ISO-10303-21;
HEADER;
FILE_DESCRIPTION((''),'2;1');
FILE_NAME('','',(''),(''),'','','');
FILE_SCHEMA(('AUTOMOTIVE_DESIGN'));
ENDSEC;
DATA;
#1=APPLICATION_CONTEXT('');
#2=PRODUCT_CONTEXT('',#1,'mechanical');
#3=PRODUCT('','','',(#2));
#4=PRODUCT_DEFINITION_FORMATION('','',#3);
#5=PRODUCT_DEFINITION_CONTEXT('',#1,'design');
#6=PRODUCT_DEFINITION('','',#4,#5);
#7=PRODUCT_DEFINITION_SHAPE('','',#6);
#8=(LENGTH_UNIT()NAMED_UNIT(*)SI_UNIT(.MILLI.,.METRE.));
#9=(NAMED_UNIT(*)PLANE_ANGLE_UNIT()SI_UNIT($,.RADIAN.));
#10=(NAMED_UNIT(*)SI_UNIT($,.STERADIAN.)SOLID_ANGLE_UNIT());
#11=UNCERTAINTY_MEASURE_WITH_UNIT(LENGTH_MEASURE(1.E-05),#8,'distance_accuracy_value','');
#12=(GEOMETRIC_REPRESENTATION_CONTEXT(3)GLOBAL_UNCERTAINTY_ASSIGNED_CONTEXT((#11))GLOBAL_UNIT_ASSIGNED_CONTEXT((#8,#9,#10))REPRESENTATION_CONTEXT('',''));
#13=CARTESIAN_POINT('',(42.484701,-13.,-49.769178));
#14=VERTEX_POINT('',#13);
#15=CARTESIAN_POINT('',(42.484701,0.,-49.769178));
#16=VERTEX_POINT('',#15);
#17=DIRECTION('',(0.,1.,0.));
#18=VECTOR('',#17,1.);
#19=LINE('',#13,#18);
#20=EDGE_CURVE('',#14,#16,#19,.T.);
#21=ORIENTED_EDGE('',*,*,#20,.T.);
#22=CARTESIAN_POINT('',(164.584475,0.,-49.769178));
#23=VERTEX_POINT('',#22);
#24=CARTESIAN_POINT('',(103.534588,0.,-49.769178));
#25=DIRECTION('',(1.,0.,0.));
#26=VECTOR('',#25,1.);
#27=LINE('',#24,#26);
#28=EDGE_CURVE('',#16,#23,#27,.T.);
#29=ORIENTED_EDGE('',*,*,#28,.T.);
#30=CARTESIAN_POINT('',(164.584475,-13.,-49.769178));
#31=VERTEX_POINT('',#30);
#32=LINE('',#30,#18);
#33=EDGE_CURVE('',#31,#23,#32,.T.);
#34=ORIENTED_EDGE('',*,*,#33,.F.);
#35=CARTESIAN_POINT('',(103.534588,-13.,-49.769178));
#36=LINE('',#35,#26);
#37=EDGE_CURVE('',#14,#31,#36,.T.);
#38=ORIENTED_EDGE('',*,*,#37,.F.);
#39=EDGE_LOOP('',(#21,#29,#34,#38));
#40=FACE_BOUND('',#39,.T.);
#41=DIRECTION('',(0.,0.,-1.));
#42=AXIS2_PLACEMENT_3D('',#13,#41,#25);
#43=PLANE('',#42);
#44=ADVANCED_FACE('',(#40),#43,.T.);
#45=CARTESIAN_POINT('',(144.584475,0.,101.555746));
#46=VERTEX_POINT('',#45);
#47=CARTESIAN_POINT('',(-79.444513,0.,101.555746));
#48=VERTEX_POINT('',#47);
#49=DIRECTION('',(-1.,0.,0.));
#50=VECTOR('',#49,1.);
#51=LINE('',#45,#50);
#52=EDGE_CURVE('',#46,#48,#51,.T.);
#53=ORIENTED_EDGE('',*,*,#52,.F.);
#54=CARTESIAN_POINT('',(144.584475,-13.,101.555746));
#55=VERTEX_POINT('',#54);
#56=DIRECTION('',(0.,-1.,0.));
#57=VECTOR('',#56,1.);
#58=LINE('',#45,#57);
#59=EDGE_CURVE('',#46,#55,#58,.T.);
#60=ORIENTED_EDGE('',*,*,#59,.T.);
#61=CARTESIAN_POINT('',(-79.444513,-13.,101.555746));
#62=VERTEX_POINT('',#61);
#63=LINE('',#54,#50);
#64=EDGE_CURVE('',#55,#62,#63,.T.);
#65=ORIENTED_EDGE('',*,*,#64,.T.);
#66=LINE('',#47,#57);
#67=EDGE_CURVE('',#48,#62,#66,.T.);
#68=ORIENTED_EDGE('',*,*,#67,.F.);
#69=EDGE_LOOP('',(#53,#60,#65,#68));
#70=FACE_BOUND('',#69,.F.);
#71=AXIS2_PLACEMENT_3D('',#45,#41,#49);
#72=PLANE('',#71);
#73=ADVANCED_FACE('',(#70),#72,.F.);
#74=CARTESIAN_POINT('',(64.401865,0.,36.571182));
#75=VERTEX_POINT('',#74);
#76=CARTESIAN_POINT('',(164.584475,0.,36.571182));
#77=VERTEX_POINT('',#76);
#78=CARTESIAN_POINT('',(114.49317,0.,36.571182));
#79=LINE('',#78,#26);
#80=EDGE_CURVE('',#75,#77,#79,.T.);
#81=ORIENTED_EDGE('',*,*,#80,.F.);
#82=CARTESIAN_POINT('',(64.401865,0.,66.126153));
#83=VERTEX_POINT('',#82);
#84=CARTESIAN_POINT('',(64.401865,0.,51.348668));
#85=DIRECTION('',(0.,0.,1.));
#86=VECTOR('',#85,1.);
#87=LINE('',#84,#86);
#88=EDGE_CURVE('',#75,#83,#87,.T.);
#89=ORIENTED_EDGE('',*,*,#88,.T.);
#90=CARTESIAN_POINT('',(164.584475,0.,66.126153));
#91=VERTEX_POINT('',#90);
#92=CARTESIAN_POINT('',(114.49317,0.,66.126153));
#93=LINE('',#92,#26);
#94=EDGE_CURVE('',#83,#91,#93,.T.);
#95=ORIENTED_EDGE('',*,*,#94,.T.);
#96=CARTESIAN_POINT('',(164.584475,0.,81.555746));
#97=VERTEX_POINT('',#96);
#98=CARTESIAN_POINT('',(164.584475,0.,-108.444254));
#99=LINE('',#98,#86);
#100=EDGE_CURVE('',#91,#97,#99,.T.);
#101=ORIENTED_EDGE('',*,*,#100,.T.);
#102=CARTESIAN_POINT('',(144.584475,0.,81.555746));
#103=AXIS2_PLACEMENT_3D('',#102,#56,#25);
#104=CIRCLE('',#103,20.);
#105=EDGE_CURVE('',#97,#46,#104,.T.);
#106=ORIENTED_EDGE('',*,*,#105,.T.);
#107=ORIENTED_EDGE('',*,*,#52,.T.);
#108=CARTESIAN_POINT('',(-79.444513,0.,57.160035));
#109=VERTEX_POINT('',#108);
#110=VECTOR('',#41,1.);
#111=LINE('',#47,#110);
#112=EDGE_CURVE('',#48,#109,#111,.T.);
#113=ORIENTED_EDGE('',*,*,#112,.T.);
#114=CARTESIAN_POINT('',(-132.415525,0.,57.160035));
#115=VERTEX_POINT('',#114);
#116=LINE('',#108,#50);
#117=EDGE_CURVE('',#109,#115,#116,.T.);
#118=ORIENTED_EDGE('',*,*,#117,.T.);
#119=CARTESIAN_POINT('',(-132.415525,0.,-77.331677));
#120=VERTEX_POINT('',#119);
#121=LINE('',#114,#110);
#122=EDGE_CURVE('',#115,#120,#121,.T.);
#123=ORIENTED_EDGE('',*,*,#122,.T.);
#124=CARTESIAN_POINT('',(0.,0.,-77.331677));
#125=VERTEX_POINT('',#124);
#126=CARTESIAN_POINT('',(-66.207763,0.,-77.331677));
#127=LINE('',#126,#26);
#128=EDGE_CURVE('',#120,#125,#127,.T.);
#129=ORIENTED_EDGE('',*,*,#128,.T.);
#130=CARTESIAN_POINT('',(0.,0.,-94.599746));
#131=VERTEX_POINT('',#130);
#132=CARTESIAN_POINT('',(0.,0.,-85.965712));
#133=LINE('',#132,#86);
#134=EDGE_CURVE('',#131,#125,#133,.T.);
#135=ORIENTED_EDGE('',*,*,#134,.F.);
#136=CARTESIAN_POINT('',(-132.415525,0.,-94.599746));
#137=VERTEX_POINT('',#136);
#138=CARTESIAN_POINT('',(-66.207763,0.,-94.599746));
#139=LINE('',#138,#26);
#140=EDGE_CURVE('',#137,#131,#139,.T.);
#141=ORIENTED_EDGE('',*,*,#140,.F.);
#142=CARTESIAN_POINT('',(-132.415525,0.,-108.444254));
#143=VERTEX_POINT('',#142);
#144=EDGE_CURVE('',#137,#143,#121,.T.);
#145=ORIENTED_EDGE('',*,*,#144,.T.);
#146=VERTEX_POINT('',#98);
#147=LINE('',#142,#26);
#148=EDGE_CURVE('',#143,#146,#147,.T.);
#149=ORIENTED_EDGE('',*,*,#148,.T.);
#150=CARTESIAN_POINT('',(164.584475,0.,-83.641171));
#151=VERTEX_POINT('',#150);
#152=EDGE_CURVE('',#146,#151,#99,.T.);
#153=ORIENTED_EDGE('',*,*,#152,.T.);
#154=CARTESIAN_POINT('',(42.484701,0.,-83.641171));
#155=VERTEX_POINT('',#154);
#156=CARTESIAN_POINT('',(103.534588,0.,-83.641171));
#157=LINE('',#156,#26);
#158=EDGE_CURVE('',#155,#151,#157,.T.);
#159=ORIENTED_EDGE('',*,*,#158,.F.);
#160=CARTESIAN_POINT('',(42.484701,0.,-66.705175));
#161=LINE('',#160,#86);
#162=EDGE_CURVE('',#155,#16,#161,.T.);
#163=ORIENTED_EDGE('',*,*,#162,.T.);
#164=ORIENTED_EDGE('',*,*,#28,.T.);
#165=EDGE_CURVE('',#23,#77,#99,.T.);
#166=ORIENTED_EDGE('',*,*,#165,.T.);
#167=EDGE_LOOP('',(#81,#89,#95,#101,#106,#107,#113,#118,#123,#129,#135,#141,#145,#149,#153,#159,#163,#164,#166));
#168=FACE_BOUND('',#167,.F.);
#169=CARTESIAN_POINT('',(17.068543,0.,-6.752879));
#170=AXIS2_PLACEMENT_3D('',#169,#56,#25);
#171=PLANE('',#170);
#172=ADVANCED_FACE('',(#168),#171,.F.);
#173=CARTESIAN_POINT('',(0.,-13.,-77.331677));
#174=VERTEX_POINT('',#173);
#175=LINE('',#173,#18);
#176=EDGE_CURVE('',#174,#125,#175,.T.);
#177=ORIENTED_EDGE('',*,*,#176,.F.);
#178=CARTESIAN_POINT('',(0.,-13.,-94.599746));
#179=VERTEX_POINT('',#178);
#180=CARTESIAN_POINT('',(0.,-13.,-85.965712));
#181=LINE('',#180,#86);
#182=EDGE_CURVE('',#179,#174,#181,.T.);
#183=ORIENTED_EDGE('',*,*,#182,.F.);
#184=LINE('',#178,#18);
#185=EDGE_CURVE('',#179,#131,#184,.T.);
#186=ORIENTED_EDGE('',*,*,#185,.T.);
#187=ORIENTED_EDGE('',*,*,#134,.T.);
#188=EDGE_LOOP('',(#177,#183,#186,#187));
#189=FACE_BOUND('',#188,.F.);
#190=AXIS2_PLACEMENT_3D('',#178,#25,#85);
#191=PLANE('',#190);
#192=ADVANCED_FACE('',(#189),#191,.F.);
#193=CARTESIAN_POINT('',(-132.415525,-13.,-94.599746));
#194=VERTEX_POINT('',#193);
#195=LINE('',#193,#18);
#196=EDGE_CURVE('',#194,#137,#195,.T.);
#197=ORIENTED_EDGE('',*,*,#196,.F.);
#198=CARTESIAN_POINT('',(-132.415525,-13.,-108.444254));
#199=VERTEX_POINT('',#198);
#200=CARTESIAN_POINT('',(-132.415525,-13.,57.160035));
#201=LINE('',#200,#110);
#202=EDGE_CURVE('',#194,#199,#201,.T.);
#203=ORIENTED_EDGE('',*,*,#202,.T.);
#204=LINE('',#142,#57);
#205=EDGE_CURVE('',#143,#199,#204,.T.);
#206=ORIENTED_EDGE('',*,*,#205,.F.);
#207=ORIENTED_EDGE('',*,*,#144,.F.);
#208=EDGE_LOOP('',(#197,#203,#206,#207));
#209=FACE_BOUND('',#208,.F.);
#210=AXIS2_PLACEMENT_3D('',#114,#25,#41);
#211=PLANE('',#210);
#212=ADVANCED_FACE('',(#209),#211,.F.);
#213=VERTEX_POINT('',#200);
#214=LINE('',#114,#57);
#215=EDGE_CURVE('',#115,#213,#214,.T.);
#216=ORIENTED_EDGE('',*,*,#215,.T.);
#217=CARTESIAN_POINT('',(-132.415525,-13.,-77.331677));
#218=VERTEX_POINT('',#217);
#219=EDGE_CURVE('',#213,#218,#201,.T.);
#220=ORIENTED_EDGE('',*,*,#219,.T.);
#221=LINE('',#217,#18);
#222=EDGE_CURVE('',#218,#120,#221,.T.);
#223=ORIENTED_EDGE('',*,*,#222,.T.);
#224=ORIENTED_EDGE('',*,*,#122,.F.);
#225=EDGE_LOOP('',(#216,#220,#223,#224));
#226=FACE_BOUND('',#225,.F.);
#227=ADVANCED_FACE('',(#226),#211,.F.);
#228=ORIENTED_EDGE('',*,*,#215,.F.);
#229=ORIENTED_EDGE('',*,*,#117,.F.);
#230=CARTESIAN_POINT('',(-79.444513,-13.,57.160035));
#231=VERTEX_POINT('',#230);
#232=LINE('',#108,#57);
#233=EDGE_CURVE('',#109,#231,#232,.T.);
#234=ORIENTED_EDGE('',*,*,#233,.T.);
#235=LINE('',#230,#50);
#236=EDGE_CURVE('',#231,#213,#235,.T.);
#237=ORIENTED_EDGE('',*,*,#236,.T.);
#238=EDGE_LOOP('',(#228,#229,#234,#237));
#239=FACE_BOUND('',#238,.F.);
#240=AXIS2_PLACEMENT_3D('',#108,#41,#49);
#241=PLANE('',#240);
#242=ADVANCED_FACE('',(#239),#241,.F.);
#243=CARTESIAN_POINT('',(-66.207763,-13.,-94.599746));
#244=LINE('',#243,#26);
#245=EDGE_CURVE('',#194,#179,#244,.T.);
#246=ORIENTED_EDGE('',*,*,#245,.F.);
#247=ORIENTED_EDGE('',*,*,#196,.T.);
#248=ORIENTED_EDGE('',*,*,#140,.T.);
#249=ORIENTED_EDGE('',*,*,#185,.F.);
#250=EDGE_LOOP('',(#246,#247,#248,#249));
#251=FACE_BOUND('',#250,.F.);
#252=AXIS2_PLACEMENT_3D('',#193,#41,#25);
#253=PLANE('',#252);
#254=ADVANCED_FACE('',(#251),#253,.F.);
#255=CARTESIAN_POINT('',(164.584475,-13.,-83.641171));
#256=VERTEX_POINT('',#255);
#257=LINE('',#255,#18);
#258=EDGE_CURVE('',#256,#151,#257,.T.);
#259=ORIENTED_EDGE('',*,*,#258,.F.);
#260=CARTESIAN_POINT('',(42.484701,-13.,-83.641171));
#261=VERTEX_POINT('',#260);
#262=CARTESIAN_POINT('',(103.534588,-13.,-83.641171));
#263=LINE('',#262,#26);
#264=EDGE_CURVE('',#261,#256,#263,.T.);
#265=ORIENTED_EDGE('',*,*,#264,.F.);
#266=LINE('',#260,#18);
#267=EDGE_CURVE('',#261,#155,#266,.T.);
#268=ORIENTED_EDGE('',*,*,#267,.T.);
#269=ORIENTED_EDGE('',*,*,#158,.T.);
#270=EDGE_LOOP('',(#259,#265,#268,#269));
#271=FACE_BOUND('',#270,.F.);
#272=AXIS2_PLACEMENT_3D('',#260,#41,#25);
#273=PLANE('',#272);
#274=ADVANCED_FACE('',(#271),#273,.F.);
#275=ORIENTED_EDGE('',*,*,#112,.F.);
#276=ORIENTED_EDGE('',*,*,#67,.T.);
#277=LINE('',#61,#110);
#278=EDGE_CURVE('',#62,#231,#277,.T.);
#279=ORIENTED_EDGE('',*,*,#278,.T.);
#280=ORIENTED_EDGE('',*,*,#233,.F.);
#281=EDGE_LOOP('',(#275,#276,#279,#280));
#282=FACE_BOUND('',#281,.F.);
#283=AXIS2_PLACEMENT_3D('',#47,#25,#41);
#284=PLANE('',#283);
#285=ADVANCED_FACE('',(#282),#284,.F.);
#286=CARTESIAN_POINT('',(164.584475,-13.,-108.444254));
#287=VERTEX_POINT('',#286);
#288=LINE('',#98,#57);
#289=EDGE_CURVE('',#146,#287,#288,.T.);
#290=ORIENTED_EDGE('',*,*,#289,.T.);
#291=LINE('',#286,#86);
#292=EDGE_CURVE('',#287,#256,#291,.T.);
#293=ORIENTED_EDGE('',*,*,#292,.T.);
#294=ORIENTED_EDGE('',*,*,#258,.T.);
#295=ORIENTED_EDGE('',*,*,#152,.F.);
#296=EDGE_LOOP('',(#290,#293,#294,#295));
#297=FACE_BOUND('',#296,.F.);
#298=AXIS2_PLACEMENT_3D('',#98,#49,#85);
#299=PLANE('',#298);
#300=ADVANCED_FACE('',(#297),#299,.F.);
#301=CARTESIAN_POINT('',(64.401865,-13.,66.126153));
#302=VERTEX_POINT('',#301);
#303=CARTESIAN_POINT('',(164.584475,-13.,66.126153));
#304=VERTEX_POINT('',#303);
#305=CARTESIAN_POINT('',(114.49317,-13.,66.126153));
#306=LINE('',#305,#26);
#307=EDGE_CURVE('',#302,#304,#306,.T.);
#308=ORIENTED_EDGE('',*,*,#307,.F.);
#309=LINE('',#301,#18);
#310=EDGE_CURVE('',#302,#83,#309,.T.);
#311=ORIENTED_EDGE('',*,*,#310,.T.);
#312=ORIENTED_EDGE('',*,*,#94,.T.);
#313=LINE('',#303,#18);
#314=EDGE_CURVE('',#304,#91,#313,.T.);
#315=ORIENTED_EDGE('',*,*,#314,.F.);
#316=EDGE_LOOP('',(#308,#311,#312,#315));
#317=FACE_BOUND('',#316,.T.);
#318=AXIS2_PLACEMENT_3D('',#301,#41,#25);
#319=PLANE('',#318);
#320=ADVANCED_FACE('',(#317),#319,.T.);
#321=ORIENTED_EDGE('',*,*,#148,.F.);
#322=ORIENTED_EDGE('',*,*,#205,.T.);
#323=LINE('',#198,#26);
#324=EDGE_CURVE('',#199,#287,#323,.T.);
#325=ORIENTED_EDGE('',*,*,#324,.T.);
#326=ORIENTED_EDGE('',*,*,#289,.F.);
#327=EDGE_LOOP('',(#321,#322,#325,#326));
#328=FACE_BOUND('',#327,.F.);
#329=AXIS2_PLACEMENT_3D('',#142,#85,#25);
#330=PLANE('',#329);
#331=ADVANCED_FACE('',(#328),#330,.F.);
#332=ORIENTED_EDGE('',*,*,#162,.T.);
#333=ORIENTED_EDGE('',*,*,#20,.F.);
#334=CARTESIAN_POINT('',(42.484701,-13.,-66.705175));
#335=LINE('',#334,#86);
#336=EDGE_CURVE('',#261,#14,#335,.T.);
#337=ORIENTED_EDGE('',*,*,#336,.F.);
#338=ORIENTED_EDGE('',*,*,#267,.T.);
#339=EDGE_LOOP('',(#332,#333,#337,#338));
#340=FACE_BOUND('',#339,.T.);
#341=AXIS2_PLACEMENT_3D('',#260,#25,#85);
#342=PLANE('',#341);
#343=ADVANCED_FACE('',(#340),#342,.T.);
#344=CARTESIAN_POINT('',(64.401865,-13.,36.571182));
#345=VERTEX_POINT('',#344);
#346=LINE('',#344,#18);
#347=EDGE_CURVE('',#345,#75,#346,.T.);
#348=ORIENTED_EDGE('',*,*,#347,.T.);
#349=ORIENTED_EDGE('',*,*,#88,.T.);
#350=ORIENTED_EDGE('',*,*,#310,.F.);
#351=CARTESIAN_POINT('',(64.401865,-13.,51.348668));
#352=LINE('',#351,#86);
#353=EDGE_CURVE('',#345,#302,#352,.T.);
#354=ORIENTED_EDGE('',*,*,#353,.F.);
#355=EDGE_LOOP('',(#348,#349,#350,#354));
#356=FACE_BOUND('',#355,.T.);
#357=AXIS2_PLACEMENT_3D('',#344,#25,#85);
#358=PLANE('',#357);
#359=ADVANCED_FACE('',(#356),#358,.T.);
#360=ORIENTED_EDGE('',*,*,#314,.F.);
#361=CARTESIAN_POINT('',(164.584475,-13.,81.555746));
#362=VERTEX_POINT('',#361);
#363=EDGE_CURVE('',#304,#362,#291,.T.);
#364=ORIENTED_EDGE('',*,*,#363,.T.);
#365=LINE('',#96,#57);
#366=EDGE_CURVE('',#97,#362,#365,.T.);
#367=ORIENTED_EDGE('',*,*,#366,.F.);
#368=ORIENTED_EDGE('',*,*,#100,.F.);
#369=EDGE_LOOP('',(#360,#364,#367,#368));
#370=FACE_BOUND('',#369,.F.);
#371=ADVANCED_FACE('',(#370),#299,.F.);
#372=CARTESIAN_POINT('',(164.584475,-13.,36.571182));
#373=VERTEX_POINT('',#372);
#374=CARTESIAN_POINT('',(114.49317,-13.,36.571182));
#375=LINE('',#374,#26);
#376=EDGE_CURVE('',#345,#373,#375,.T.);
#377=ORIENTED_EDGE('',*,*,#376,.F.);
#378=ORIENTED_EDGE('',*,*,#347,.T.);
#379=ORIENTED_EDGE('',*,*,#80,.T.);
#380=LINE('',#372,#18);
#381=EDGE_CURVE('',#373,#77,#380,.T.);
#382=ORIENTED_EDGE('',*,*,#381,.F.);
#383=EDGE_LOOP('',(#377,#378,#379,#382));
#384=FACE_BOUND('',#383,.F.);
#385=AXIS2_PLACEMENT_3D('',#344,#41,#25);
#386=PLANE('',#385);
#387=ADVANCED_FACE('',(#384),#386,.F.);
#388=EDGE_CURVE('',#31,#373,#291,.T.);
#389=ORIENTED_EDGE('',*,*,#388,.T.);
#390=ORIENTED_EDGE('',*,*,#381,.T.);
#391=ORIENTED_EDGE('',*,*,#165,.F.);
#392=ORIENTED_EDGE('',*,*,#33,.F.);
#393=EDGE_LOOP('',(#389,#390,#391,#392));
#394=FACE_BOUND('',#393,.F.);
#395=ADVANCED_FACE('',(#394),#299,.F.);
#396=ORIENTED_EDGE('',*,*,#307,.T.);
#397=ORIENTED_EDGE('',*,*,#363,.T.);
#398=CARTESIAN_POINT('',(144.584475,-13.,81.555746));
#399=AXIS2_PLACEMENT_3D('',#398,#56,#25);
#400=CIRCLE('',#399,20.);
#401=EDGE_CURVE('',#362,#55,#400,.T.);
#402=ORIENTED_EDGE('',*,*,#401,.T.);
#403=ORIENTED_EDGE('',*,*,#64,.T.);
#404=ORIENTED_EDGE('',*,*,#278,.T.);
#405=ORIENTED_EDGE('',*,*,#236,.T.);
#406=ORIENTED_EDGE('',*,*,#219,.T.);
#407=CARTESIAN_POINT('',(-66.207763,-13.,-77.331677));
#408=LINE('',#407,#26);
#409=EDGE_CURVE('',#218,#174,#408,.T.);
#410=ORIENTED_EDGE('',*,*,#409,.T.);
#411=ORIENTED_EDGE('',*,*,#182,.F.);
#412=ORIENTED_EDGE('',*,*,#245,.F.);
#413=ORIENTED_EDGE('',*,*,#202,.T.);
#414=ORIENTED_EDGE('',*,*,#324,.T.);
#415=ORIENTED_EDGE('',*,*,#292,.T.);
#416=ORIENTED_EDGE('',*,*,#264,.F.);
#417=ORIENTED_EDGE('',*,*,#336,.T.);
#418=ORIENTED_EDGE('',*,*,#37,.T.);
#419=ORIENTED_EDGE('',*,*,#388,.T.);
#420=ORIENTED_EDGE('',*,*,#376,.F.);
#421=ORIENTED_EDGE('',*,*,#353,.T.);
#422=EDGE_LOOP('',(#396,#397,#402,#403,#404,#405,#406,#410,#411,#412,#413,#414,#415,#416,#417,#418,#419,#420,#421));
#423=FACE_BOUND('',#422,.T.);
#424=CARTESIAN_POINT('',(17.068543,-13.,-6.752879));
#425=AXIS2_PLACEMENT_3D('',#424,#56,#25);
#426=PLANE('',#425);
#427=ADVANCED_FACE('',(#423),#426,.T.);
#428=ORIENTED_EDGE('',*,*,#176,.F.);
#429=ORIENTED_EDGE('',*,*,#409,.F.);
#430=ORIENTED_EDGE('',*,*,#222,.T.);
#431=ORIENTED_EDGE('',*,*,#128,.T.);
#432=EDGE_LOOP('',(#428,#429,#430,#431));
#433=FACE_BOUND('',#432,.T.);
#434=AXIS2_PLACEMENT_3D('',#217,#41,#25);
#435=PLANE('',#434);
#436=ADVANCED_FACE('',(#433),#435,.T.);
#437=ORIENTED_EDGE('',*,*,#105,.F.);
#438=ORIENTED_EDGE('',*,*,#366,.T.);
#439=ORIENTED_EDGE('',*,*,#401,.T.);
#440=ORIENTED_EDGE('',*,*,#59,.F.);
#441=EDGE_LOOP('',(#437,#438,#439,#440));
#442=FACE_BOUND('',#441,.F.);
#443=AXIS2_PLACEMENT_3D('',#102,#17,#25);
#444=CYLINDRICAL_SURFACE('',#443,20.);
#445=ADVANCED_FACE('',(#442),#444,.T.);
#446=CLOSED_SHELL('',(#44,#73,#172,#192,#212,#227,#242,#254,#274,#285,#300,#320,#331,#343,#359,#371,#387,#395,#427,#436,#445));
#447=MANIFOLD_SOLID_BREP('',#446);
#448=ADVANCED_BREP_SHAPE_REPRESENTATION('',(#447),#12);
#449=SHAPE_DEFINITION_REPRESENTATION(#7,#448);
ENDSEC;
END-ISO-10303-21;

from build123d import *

# Parameters (mm, degrees)
F1_DEPTH = 13
F2_W     = 132.4155251533
F2_H     = 17.2680690885
F3_DEPTH = 13
F4_W     = 100.1826098412
F4_H     = 29.5549705625
F5_DEPTH = 13
F6_W     = 122.0997741669
F6_H     = 33.8719934225
F7_DEPTH = 13


# Not quite as in the source:
# - the program builds the solid bodies; features that only make, move or delete a surface that nothing else refers to are left out


with BuildPart() as f1:
    # F0 (on Front) → F1 (new body)
    with BuildSketch(Plane.XZ):
        with BuildLine():
            Line((144.5844748467, 101.5557457248), (-79.4445127249, 101.5557457248))
            Line((-79.4445127249, 101.5557457248), (-79.4445127249, 57.1600347757))
            Line((-79.4445127249, 57.1600347757), (-132.4155251533, 57.1600347757))
            Line((-132.4155251533, 57.1600347757), (-132.4155251533, -108.4442542752))
            Line((-132.4155251533, -108.4442542752), (164.5844748467, -108.4442542752))
            Line((164.5844748467, -108.4442542752), (164.5844748467, 81.5557457248))
            ThreePointArc((164.5844748467, 81.5557457248), (158.7266104705, 95.6978813486), (144.5844748467, 101.5557457248))
        make_face()
    extrude(amount=F1_DEPTH)

    # F2 (on face) → F3 (cut)
    with BuildSketch(Plane.XZ.offset(13)):
        with Locations((-66.2077625766, -85.9657116234)):
            Rectangle(F2_W, F2_H)
    extrude(amount=-F3_DEPTH, mode=Mode.SUBTRACT)

    # F4 (on face) → F5 (cut)
    with BuildSketch(Plane.XZ.offset(13)):
        with Locations((114.4931699261, 51.3486675918)):
            Rectangle(F4_W, F4_H)
    extrude(amount=-F5_DEPTH, mode=Mode.SUBTRACT)

    # F6 (on face) → F7 (cut)
    with BuildSketch(Plane.XZ.offset(13)):
        with Locations((103.5345877632, -66.7051747441)):
            Rectangle(F6_W, F6_H)
    extrude(amount=-F7_DEPTH, mode=Mode.SUBTRACT)


solid = f1.part
